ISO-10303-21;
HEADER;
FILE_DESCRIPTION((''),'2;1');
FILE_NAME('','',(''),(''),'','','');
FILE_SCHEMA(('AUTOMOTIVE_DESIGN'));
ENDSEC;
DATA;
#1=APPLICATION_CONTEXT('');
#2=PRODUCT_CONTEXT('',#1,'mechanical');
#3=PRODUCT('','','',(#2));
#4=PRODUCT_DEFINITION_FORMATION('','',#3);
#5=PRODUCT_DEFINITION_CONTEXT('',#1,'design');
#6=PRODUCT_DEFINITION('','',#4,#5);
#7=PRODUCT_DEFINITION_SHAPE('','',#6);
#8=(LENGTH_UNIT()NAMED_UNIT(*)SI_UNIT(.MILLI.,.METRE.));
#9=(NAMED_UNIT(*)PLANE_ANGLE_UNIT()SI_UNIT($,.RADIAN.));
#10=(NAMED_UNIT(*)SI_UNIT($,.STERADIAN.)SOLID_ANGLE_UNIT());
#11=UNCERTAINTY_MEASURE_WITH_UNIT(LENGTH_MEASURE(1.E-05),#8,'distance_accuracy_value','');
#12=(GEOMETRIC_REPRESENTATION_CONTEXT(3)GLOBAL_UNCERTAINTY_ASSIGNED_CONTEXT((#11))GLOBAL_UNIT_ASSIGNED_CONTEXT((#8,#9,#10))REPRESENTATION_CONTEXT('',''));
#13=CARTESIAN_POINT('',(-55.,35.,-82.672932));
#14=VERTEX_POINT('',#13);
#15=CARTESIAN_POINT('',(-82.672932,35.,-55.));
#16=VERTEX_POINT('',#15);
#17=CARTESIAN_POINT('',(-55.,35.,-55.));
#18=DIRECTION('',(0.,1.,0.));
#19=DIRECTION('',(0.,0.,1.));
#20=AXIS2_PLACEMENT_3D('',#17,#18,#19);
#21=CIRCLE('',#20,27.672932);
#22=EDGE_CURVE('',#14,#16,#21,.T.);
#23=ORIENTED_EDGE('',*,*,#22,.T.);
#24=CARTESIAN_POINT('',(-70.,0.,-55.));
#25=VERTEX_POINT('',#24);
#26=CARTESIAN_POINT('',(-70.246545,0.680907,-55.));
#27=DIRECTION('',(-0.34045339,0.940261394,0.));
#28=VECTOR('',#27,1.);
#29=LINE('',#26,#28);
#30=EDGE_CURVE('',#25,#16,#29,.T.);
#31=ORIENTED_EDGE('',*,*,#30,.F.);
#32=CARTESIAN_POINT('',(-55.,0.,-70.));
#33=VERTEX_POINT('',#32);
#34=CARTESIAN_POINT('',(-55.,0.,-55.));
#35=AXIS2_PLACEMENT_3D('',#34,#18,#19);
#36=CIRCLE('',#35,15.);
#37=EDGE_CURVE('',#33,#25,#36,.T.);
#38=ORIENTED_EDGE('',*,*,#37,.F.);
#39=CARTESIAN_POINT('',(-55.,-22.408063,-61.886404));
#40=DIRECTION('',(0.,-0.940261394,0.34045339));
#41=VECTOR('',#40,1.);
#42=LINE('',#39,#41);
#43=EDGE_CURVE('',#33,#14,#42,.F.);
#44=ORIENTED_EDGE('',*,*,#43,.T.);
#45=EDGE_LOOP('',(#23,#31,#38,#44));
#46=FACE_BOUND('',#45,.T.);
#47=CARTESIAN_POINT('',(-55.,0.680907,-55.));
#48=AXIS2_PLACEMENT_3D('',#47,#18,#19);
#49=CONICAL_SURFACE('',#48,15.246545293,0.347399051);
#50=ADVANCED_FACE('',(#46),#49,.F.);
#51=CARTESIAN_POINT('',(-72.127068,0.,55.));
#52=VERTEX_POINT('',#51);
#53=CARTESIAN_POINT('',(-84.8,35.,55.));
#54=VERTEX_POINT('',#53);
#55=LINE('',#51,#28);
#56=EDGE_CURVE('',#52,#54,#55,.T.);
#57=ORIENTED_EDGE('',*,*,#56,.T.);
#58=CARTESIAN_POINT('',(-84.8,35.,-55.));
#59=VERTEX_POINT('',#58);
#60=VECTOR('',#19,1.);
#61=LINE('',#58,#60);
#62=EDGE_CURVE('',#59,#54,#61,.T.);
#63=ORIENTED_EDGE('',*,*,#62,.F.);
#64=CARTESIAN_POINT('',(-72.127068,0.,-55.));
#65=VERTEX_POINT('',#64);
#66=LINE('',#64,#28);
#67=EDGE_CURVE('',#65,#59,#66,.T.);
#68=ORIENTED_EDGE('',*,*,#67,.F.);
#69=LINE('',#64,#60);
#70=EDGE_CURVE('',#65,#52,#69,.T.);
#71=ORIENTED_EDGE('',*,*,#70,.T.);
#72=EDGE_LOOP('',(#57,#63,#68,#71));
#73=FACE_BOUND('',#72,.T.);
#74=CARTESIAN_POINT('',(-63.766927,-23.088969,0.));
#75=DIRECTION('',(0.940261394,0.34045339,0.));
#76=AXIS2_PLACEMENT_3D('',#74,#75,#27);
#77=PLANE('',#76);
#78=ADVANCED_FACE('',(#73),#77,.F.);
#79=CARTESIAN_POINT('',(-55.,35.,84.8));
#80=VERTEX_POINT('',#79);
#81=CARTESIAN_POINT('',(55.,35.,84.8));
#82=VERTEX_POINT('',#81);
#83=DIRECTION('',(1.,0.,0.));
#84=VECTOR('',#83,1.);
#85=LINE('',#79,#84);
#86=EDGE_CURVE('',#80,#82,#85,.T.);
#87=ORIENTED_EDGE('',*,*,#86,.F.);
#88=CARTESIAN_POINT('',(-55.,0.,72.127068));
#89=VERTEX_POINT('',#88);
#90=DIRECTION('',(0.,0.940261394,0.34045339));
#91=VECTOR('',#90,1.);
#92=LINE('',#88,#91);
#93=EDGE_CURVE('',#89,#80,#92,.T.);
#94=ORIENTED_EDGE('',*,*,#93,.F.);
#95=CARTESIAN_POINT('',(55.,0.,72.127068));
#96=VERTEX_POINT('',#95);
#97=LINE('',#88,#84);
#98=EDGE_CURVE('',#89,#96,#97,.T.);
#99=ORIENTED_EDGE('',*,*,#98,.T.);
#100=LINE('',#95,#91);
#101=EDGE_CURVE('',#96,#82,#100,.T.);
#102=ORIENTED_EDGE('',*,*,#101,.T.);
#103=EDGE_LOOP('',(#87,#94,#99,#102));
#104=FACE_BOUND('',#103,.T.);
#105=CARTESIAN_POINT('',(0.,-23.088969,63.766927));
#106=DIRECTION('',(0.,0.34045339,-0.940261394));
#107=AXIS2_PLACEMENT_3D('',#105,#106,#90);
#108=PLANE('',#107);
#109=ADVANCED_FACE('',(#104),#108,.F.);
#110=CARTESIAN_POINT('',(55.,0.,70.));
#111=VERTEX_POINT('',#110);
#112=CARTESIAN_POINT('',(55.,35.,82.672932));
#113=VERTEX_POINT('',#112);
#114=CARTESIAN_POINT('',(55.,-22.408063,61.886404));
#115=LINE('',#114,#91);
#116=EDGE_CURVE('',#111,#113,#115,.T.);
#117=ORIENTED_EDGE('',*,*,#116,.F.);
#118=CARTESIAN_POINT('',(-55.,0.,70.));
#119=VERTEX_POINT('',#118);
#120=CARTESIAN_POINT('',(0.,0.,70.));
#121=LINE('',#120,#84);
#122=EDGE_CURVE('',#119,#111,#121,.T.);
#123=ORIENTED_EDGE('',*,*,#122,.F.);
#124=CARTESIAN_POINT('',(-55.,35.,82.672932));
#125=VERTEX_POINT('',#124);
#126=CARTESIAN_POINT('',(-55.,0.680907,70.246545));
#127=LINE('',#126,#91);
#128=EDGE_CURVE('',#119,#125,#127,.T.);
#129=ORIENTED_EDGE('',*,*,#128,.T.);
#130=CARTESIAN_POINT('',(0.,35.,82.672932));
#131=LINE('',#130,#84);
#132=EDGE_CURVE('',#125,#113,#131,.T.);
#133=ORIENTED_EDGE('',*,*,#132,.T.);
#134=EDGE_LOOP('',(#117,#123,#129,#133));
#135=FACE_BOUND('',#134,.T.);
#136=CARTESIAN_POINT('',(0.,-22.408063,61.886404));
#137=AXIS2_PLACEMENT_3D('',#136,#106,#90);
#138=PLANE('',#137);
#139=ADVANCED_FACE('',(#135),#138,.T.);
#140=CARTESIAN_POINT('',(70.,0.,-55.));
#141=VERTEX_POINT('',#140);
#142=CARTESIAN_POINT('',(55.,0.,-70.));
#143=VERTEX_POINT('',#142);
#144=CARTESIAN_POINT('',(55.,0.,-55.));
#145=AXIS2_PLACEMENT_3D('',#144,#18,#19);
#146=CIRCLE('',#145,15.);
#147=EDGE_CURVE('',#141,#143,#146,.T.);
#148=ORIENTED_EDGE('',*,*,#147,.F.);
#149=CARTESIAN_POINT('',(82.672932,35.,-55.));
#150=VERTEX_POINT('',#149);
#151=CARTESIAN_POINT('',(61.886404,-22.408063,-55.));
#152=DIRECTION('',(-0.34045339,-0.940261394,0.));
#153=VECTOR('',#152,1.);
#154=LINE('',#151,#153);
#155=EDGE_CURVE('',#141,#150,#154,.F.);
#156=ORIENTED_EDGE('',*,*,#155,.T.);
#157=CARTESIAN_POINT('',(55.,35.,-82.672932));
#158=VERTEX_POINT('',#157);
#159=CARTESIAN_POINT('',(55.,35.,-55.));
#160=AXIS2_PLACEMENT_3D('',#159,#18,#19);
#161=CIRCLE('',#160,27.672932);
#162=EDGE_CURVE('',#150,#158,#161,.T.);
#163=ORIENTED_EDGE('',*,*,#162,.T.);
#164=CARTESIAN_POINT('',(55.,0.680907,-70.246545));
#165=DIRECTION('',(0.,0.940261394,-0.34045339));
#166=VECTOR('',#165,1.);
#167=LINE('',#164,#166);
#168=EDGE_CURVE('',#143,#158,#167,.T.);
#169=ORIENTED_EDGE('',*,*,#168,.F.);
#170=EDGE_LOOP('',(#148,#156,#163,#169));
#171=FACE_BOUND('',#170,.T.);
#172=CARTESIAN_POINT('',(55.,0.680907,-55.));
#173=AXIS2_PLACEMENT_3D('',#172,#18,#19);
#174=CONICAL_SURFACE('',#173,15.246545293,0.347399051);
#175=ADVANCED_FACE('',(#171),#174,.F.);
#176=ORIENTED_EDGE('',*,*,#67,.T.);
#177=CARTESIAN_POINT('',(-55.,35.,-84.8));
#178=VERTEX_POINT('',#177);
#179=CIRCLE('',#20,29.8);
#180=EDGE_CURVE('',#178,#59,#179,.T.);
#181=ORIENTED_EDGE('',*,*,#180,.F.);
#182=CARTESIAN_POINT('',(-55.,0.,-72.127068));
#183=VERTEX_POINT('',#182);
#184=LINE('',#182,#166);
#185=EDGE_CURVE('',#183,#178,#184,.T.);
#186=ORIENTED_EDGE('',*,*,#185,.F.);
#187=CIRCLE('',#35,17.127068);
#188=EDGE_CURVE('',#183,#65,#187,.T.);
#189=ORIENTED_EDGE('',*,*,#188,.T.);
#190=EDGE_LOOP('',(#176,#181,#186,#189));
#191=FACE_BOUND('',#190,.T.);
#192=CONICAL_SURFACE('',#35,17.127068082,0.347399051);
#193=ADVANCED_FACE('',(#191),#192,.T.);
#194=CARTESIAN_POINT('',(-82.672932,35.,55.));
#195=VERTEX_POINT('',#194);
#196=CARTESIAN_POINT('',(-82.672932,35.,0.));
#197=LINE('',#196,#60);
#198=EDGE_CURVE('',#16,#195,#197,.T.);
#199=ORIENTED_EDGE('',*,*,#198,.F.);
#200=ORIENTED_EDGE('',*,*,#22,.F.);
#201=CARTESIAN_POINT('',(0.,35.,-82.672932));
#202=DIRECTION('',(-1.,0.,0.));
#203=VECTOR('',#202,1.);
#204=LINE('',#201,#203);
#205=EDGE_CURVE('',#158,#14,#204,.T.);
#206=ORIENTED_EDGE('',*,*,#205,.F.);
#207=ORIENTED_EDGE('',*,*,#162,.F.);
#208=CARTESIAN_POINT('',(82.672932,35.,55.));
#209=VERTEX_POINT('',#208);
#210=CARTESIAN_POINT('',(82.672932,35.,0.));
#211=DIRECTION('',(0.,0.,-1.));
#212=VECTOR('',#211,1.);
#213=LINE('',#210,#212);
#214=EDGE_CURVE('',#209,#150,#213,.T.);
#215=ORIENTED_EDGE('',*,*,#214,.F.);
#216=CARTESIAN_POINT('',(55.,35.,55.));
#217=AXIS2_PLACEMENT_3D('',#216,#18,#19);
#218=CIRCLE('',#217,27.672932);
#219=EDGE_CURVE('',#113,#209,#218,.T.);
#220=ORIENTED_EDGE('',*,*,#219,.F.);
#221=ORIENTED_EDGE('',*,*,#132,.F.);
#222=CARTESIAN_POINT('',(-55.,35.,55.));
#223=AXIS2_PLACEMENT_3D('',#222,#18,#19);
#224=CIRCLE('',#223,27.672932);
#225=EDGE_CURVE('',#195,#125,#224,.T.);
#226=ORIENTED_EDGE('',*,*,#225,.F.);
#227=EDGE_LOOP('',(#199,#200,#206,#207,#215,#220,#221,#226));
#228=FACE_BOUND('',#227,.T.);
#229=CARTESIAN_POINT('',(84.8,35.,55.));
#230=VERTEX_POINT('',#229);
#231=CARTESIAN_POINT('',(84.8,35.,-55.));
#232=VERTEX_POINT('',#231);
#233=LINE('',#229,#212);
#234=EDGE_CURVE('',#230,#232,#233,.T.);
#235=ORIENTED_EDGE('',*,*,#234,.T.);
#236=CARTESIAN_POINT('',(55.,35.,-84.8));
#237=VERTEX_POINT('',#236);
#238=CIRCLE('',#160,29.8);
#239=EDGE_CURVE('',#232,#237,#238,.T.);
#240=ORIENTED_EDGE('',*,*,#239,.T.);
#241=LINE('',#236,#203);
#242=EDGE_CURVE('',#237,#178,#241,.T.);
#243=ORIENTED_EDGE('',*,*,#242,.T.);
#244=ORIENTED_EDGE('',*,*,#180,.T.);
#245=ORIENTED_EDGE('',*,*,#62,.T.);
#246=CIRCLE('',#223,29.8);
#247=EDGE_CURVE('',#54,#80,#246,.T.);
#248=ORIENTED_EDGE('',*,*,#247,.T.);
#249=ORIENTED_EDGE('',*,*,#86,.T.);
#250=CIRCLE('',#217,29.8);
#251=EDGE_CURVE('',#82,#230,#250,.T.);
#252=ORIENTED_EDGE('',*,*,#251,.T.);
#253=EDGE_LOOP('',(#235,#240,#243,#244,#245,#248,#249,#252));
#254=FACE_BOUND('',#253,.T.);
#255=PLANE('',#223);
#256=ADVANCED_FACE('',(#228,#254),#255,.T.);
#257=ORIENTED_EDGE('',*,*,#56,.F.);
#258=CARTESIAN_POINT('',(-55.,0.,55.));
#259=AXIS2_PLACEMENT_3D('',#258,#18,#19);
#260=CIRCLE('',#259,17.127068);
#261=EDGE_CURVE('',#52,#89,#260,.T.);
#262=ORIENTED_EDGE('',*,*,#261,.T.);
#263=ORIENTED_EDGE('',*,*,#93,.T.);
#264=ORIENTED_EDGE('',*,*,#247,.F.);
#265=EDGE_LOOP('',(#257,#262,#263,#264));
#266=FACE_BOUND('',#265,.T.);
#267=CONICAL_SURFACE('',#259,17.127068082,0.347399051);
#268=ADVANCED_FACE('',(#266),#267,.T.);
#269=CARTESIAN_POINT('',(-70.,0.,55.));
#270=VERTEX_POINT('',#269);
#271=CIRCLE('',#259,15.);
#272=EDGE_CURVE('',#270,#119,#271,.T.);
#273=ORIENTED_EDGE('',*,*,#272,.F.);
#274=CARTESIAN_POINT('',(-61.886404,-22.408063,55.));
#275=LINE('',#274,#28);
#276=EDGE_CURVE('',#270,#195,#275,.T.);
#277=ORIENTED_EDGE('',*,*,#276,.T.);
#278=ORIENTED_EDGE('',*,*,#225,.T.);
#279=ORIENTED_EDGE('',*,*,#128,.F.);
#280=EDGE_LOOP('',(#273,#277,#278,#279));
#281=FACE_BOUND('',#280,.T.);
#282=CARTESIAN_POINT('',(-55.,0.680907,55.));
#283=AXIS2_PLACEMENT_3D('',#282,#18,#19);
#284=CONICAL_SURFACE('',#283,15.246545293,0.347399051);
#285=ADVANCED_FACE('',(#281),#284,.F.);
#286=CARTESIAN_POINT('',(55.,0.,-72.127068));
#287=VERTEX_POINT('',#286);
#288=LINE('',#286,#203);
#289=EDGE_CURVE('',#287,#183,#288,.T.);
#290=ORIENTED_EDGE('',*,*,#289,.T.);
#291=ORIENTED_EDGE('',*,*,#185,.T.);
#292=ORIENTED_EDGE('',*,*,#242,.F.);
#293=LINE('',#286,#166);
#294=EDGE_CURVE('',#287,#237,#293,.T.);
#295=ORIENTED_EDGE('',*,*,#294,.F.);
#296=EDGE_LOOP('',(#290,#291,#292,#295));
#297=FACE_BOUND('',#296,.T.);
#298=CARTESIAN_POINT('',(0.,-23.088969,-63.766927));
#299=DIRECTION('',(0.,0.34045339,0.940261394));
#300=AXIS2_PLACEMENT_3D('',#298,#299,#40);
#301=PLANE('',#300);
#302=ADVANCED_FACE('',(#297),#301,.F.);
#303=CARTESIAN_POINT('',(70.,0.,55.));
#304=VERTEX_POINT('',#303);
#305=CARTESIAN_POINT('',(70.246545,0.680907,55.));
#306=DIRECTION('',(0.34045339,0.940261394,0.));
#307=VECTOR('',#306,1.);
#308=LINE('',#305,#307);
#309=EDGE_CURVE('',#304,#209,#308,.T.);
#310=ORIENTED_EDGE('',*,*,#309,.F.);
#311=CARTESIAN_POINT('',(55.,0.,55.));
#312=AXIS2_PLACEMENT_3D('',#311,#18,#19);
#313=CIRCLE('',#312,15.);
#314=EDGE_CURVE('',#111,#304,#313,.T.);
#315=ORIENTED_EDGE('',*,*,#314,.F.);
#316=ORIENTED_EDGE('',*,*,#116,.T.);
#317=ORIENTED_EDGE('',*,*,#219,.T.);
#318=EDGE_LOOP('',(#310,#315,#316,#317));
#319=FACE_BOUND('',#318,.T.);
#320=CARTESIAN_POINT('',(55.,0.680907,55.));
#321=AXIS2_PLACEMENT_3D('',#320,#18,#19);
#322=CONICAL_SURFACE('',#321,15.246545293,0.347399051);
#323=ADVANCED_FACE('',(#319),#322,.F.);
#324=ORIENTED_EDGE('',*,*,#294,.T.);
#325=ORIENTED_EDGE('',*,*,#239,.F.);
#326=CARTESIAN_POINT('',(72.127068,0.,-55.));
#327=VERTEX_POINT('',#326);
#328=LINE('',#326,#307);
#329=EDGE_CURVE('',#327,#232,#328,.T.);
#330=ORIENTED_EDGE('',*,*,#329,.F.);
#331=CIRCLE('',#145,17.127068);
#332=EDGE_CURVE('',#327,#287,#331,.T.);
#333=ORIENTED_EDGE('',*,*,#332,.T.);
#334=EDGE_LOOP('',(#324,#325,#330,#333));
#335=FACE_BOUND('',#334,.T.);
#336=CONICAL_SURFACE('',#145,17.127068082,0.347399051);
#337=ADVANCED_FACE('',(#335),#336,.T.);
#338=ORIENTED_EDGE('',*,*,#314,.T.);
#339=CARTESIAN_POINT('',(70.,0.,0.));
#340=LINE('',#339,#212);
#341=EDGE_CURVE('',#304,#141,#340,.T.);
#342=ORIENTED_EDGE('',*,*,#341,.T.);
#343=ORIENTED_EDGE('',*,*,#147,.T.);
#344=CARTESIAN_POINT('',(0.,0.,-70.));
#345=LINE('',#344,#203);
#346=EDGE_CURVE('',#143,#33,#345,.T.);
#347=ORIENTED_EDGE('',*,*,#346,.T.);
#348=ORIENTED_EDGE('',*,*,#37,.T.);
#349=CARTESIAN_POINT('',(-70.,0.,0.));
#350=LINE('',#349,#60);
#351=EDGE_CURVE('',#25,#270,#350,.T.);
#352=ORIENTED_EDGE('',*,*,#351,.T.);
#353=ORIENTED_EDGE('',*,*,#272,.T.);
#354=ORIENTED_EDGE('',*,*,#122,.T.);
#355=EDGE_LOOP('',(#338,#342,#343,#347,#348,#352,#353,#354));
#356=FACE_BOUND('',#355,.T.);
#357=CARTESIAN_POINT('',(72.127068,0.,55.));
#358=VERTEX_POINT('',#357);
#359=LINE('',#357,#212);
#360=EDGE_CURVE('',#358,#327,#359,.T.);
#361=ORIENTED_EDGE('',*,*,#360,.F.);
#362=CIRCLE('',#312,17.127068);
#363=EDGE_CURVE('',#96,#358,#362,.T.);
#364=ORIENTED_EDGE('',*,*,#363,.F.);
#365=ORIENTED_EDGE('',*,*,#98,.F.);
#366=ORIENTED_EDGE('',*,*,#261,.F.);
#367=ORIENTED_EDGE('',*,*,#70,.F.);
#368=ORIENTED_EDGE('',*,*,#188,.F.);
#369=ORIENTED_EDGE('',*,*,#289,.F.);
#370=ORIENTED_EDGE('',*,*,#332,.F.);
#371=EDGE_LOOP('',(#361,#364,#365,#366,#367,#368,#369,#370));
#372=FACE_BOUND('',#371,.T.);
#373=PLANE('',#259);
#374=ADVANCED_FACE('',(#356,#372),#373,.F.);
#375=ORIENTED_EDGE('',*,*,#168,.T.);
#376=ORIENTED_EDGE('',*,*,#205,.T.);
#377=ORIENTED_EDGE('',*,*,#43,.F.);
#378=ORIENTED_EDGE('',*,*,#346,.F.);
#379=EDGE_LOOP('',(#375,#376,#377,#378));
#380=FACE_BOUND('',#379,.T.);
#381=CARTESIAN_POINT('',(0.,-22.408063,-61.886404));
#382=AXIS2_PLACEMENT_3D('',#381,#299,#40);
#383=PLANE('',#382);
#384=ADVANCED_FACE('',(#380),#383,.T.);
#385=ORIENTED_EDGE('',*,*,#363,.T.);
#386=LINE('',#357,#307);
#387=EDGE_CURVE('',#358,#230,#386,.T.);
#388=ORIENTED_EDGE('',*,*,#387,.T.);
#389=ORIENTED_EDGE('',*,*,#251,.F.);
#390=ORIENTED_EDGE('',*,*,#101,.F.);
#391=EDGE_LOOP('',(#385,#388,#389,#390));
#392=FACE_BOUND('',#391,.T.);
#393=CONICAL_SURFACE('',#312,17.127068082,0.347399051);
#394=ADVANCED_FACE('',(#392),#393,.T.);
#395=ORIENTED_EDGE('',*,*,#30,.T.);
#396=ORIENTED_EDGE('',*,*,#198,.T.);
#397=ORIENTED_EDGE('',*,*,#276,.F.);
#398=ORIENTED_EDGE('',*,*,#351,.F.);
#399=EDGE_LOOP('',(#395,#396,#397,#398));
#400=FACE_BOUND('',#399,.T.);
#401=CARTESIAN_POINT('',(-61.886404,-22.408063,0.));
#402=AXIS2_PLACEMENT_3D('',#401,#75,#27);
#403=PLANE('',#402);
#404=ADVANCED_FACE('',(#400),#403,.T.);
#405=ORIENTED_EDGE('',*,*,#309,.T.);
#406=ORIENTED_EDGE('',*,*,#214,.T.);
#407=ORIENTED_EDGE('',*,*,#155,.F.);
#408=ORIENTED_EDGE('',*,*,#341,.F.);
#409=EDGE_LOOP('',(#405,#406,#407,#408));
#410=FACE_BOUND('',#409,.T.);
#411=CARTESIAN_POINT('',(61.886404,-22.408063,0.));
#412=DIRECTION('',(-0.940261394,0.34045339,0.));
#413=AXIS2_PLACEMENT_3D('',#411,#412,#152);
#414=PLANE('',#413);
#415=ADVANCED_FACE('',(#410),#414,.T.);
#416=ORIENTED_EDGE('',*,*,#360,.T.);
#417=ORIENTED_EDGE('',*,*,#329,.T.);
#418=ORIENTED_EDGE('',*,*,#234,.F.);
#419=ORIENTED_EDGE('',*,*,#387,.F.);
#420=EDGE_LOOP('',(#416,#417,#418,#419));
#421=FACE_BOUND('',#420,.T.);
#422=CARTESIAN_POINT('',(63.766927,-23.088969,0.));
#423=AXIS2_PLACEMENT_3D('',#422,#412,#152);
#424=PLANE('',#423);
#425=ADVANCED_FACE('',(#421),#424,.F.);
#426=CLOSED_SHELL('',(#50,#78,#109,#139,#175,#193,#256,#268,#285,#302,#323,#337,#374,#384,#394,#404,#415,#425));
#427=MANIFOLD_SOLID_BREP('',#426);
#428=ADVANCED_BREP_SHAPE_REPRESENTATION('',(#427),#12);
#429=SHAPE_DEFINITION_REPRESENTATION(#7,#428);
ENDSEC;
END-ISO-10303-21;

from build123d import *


with BuildPart() as part:
    # Outlet Profile for Hopper Shape → Hopper Shape section 0
    with BuildSketch(Plane(origin=(0, 0, 0), x_dir=(1, 0, 0), z_dir=(0, 1, 0))):
        with BuildLine():
            Line((-55, -72.127068082), (55, -72.127068082))
            # circular arc as an exact rational Bezier (weights 1, cos(half-angle), 1)
            Bezier((55, -72.127068082), (72.127068082, -72.127068082), (72.127068082, -55), weights=[1, 0.707106781, 1])
            Line((72.127068082, -55), (72.127068082, 55))
            Bezier((72.127068082, 55), (72.127068082, 72.127068082), (55, 72.127068082), weights=[1, 0.707106781, 1])
            Line((55, 72.127068082), (-55, 72.127068082))
            Bezier((-55, 72.127068082), (-72.127068082, 72.127068082), (-72.127068082, 55), weights=[1, 0.707106781, 1])
            Line((-72.127068082, 55), (-72.127068082, -55))
            Bezier((-72.127068082, -55), (-72.127068082, -72.127068082), (-55, -72.127068082), weights=[1, 0.707106781, 1])
        make_face()
    # Inlet Profile for Hopper Shape → Hopper Shape section 1
    with BuildSketch(Plane(origin=(0, 35, 0), x_dir=(1, 0, 0), z_dir=(0, 1, 0))):
        with BuildLine():
            Line((-55, -84.8), (55, -84.8))
            Bezier((55, -84.8), (84.8, -84.8), (84.8, -55), weights=[1, 0.707106781, 1])
            Line((84.8, -55), (84.8, 55))
            Bezier((84.8, 55), (84.8, 84.8), (55, 84.8), weights=[1, 0.707106781, 1])
            Line((55, 84.8), (-55, 84.8))
            Bezier((-55, 84.8), (-84.8, 84.8), (-84.8, 55), weights=[1, 0.707106781, 1])
            Line((-84.8, 55), (-84.8, -55))
            Bezier((-84.8, -55), (-84.8, -84.8), (-55, -84.8), weights=[1, 0.707106781, 1])
        make_face()
    loft()

    # Wall Thickness: read off the stored shape, not the designer's step
    # Wall Thickness: loft between two sections, ruled curve by curve
    wall_thickness_from = [
        Edge.make_three_point_arc((-55, 0, -70), (-65.606601718, 0, -65.606601718), (-70, 0, -55)),
        Edge.make_three_point_arc((-70, 0, 55), (-65.606601718, 0, 65.606601718), (-55, 0, 70)),
        Edge.make_three_point_arc((55, 0, 70), (65.606601718, 0, 65.606601718), (70, 0, 55)),
        Edge.make_three_point_arc((70, 0, -55), (65.606601718, 0, -65.606601718), (55, 0, -70)),
        Edge.make_line((-55, 0, -70), (55, 0, -70)),
        Edge.make_line((-70, 0, 55), (-70, 0, -55)),
        Edge.make_line((55, 0, 70), (-55, 0, 70)),
        Edge.make_line((70, 0, -55), (70, 0, 55)),
    ]
    wall_thickness_to = [
        Edge.make_three_point_arc((-55, 35, -82.672931918), (-74.567717815, 35, -74.567717815), (-82.672931918, 35, -55)),
        Edge.make_three_point_arc((-82.672931918, 35, 55), (-74.567717815, 35, 74.567717815), (-55, 35, 82.672931918)),
        Edge.make_three_point_arc((55, 35, 82.672931918), (74.567717815, 35, 74.567717815), (82.672931918, 35, 55)),
        Edge.make_three_point_arc((82.672931918, 35, -55), (74.567717815, 35, -74.567717815), (55, 35, -82.672931918)),
        Edge.make_line((-55, 35, -82.672931918), (55, 35, -82.672931918)),
        Edge.make_line((-82.672931918, 35, 55), (-82.672931918, 35, -55)),
        Edge.make_line((55, 35, 82.672931918), (-55, 35, 82.672931918)),
        Edge.make_line((82.672931918, 35, -55), (82.672931918, 35, 55)),
    ]
    wall_thickness = Solid(Shell([*[Face.make_surface_from_curves(wall_thickness_from[k], wall_thickness_to[k]) for k in range(8)], Face(Wire(wall_thickness_from)), Face(Wire(wall_thickness_to))]))
    add(wall_thickness, mode=Mode.SUBTRACT)


solid = part.part
